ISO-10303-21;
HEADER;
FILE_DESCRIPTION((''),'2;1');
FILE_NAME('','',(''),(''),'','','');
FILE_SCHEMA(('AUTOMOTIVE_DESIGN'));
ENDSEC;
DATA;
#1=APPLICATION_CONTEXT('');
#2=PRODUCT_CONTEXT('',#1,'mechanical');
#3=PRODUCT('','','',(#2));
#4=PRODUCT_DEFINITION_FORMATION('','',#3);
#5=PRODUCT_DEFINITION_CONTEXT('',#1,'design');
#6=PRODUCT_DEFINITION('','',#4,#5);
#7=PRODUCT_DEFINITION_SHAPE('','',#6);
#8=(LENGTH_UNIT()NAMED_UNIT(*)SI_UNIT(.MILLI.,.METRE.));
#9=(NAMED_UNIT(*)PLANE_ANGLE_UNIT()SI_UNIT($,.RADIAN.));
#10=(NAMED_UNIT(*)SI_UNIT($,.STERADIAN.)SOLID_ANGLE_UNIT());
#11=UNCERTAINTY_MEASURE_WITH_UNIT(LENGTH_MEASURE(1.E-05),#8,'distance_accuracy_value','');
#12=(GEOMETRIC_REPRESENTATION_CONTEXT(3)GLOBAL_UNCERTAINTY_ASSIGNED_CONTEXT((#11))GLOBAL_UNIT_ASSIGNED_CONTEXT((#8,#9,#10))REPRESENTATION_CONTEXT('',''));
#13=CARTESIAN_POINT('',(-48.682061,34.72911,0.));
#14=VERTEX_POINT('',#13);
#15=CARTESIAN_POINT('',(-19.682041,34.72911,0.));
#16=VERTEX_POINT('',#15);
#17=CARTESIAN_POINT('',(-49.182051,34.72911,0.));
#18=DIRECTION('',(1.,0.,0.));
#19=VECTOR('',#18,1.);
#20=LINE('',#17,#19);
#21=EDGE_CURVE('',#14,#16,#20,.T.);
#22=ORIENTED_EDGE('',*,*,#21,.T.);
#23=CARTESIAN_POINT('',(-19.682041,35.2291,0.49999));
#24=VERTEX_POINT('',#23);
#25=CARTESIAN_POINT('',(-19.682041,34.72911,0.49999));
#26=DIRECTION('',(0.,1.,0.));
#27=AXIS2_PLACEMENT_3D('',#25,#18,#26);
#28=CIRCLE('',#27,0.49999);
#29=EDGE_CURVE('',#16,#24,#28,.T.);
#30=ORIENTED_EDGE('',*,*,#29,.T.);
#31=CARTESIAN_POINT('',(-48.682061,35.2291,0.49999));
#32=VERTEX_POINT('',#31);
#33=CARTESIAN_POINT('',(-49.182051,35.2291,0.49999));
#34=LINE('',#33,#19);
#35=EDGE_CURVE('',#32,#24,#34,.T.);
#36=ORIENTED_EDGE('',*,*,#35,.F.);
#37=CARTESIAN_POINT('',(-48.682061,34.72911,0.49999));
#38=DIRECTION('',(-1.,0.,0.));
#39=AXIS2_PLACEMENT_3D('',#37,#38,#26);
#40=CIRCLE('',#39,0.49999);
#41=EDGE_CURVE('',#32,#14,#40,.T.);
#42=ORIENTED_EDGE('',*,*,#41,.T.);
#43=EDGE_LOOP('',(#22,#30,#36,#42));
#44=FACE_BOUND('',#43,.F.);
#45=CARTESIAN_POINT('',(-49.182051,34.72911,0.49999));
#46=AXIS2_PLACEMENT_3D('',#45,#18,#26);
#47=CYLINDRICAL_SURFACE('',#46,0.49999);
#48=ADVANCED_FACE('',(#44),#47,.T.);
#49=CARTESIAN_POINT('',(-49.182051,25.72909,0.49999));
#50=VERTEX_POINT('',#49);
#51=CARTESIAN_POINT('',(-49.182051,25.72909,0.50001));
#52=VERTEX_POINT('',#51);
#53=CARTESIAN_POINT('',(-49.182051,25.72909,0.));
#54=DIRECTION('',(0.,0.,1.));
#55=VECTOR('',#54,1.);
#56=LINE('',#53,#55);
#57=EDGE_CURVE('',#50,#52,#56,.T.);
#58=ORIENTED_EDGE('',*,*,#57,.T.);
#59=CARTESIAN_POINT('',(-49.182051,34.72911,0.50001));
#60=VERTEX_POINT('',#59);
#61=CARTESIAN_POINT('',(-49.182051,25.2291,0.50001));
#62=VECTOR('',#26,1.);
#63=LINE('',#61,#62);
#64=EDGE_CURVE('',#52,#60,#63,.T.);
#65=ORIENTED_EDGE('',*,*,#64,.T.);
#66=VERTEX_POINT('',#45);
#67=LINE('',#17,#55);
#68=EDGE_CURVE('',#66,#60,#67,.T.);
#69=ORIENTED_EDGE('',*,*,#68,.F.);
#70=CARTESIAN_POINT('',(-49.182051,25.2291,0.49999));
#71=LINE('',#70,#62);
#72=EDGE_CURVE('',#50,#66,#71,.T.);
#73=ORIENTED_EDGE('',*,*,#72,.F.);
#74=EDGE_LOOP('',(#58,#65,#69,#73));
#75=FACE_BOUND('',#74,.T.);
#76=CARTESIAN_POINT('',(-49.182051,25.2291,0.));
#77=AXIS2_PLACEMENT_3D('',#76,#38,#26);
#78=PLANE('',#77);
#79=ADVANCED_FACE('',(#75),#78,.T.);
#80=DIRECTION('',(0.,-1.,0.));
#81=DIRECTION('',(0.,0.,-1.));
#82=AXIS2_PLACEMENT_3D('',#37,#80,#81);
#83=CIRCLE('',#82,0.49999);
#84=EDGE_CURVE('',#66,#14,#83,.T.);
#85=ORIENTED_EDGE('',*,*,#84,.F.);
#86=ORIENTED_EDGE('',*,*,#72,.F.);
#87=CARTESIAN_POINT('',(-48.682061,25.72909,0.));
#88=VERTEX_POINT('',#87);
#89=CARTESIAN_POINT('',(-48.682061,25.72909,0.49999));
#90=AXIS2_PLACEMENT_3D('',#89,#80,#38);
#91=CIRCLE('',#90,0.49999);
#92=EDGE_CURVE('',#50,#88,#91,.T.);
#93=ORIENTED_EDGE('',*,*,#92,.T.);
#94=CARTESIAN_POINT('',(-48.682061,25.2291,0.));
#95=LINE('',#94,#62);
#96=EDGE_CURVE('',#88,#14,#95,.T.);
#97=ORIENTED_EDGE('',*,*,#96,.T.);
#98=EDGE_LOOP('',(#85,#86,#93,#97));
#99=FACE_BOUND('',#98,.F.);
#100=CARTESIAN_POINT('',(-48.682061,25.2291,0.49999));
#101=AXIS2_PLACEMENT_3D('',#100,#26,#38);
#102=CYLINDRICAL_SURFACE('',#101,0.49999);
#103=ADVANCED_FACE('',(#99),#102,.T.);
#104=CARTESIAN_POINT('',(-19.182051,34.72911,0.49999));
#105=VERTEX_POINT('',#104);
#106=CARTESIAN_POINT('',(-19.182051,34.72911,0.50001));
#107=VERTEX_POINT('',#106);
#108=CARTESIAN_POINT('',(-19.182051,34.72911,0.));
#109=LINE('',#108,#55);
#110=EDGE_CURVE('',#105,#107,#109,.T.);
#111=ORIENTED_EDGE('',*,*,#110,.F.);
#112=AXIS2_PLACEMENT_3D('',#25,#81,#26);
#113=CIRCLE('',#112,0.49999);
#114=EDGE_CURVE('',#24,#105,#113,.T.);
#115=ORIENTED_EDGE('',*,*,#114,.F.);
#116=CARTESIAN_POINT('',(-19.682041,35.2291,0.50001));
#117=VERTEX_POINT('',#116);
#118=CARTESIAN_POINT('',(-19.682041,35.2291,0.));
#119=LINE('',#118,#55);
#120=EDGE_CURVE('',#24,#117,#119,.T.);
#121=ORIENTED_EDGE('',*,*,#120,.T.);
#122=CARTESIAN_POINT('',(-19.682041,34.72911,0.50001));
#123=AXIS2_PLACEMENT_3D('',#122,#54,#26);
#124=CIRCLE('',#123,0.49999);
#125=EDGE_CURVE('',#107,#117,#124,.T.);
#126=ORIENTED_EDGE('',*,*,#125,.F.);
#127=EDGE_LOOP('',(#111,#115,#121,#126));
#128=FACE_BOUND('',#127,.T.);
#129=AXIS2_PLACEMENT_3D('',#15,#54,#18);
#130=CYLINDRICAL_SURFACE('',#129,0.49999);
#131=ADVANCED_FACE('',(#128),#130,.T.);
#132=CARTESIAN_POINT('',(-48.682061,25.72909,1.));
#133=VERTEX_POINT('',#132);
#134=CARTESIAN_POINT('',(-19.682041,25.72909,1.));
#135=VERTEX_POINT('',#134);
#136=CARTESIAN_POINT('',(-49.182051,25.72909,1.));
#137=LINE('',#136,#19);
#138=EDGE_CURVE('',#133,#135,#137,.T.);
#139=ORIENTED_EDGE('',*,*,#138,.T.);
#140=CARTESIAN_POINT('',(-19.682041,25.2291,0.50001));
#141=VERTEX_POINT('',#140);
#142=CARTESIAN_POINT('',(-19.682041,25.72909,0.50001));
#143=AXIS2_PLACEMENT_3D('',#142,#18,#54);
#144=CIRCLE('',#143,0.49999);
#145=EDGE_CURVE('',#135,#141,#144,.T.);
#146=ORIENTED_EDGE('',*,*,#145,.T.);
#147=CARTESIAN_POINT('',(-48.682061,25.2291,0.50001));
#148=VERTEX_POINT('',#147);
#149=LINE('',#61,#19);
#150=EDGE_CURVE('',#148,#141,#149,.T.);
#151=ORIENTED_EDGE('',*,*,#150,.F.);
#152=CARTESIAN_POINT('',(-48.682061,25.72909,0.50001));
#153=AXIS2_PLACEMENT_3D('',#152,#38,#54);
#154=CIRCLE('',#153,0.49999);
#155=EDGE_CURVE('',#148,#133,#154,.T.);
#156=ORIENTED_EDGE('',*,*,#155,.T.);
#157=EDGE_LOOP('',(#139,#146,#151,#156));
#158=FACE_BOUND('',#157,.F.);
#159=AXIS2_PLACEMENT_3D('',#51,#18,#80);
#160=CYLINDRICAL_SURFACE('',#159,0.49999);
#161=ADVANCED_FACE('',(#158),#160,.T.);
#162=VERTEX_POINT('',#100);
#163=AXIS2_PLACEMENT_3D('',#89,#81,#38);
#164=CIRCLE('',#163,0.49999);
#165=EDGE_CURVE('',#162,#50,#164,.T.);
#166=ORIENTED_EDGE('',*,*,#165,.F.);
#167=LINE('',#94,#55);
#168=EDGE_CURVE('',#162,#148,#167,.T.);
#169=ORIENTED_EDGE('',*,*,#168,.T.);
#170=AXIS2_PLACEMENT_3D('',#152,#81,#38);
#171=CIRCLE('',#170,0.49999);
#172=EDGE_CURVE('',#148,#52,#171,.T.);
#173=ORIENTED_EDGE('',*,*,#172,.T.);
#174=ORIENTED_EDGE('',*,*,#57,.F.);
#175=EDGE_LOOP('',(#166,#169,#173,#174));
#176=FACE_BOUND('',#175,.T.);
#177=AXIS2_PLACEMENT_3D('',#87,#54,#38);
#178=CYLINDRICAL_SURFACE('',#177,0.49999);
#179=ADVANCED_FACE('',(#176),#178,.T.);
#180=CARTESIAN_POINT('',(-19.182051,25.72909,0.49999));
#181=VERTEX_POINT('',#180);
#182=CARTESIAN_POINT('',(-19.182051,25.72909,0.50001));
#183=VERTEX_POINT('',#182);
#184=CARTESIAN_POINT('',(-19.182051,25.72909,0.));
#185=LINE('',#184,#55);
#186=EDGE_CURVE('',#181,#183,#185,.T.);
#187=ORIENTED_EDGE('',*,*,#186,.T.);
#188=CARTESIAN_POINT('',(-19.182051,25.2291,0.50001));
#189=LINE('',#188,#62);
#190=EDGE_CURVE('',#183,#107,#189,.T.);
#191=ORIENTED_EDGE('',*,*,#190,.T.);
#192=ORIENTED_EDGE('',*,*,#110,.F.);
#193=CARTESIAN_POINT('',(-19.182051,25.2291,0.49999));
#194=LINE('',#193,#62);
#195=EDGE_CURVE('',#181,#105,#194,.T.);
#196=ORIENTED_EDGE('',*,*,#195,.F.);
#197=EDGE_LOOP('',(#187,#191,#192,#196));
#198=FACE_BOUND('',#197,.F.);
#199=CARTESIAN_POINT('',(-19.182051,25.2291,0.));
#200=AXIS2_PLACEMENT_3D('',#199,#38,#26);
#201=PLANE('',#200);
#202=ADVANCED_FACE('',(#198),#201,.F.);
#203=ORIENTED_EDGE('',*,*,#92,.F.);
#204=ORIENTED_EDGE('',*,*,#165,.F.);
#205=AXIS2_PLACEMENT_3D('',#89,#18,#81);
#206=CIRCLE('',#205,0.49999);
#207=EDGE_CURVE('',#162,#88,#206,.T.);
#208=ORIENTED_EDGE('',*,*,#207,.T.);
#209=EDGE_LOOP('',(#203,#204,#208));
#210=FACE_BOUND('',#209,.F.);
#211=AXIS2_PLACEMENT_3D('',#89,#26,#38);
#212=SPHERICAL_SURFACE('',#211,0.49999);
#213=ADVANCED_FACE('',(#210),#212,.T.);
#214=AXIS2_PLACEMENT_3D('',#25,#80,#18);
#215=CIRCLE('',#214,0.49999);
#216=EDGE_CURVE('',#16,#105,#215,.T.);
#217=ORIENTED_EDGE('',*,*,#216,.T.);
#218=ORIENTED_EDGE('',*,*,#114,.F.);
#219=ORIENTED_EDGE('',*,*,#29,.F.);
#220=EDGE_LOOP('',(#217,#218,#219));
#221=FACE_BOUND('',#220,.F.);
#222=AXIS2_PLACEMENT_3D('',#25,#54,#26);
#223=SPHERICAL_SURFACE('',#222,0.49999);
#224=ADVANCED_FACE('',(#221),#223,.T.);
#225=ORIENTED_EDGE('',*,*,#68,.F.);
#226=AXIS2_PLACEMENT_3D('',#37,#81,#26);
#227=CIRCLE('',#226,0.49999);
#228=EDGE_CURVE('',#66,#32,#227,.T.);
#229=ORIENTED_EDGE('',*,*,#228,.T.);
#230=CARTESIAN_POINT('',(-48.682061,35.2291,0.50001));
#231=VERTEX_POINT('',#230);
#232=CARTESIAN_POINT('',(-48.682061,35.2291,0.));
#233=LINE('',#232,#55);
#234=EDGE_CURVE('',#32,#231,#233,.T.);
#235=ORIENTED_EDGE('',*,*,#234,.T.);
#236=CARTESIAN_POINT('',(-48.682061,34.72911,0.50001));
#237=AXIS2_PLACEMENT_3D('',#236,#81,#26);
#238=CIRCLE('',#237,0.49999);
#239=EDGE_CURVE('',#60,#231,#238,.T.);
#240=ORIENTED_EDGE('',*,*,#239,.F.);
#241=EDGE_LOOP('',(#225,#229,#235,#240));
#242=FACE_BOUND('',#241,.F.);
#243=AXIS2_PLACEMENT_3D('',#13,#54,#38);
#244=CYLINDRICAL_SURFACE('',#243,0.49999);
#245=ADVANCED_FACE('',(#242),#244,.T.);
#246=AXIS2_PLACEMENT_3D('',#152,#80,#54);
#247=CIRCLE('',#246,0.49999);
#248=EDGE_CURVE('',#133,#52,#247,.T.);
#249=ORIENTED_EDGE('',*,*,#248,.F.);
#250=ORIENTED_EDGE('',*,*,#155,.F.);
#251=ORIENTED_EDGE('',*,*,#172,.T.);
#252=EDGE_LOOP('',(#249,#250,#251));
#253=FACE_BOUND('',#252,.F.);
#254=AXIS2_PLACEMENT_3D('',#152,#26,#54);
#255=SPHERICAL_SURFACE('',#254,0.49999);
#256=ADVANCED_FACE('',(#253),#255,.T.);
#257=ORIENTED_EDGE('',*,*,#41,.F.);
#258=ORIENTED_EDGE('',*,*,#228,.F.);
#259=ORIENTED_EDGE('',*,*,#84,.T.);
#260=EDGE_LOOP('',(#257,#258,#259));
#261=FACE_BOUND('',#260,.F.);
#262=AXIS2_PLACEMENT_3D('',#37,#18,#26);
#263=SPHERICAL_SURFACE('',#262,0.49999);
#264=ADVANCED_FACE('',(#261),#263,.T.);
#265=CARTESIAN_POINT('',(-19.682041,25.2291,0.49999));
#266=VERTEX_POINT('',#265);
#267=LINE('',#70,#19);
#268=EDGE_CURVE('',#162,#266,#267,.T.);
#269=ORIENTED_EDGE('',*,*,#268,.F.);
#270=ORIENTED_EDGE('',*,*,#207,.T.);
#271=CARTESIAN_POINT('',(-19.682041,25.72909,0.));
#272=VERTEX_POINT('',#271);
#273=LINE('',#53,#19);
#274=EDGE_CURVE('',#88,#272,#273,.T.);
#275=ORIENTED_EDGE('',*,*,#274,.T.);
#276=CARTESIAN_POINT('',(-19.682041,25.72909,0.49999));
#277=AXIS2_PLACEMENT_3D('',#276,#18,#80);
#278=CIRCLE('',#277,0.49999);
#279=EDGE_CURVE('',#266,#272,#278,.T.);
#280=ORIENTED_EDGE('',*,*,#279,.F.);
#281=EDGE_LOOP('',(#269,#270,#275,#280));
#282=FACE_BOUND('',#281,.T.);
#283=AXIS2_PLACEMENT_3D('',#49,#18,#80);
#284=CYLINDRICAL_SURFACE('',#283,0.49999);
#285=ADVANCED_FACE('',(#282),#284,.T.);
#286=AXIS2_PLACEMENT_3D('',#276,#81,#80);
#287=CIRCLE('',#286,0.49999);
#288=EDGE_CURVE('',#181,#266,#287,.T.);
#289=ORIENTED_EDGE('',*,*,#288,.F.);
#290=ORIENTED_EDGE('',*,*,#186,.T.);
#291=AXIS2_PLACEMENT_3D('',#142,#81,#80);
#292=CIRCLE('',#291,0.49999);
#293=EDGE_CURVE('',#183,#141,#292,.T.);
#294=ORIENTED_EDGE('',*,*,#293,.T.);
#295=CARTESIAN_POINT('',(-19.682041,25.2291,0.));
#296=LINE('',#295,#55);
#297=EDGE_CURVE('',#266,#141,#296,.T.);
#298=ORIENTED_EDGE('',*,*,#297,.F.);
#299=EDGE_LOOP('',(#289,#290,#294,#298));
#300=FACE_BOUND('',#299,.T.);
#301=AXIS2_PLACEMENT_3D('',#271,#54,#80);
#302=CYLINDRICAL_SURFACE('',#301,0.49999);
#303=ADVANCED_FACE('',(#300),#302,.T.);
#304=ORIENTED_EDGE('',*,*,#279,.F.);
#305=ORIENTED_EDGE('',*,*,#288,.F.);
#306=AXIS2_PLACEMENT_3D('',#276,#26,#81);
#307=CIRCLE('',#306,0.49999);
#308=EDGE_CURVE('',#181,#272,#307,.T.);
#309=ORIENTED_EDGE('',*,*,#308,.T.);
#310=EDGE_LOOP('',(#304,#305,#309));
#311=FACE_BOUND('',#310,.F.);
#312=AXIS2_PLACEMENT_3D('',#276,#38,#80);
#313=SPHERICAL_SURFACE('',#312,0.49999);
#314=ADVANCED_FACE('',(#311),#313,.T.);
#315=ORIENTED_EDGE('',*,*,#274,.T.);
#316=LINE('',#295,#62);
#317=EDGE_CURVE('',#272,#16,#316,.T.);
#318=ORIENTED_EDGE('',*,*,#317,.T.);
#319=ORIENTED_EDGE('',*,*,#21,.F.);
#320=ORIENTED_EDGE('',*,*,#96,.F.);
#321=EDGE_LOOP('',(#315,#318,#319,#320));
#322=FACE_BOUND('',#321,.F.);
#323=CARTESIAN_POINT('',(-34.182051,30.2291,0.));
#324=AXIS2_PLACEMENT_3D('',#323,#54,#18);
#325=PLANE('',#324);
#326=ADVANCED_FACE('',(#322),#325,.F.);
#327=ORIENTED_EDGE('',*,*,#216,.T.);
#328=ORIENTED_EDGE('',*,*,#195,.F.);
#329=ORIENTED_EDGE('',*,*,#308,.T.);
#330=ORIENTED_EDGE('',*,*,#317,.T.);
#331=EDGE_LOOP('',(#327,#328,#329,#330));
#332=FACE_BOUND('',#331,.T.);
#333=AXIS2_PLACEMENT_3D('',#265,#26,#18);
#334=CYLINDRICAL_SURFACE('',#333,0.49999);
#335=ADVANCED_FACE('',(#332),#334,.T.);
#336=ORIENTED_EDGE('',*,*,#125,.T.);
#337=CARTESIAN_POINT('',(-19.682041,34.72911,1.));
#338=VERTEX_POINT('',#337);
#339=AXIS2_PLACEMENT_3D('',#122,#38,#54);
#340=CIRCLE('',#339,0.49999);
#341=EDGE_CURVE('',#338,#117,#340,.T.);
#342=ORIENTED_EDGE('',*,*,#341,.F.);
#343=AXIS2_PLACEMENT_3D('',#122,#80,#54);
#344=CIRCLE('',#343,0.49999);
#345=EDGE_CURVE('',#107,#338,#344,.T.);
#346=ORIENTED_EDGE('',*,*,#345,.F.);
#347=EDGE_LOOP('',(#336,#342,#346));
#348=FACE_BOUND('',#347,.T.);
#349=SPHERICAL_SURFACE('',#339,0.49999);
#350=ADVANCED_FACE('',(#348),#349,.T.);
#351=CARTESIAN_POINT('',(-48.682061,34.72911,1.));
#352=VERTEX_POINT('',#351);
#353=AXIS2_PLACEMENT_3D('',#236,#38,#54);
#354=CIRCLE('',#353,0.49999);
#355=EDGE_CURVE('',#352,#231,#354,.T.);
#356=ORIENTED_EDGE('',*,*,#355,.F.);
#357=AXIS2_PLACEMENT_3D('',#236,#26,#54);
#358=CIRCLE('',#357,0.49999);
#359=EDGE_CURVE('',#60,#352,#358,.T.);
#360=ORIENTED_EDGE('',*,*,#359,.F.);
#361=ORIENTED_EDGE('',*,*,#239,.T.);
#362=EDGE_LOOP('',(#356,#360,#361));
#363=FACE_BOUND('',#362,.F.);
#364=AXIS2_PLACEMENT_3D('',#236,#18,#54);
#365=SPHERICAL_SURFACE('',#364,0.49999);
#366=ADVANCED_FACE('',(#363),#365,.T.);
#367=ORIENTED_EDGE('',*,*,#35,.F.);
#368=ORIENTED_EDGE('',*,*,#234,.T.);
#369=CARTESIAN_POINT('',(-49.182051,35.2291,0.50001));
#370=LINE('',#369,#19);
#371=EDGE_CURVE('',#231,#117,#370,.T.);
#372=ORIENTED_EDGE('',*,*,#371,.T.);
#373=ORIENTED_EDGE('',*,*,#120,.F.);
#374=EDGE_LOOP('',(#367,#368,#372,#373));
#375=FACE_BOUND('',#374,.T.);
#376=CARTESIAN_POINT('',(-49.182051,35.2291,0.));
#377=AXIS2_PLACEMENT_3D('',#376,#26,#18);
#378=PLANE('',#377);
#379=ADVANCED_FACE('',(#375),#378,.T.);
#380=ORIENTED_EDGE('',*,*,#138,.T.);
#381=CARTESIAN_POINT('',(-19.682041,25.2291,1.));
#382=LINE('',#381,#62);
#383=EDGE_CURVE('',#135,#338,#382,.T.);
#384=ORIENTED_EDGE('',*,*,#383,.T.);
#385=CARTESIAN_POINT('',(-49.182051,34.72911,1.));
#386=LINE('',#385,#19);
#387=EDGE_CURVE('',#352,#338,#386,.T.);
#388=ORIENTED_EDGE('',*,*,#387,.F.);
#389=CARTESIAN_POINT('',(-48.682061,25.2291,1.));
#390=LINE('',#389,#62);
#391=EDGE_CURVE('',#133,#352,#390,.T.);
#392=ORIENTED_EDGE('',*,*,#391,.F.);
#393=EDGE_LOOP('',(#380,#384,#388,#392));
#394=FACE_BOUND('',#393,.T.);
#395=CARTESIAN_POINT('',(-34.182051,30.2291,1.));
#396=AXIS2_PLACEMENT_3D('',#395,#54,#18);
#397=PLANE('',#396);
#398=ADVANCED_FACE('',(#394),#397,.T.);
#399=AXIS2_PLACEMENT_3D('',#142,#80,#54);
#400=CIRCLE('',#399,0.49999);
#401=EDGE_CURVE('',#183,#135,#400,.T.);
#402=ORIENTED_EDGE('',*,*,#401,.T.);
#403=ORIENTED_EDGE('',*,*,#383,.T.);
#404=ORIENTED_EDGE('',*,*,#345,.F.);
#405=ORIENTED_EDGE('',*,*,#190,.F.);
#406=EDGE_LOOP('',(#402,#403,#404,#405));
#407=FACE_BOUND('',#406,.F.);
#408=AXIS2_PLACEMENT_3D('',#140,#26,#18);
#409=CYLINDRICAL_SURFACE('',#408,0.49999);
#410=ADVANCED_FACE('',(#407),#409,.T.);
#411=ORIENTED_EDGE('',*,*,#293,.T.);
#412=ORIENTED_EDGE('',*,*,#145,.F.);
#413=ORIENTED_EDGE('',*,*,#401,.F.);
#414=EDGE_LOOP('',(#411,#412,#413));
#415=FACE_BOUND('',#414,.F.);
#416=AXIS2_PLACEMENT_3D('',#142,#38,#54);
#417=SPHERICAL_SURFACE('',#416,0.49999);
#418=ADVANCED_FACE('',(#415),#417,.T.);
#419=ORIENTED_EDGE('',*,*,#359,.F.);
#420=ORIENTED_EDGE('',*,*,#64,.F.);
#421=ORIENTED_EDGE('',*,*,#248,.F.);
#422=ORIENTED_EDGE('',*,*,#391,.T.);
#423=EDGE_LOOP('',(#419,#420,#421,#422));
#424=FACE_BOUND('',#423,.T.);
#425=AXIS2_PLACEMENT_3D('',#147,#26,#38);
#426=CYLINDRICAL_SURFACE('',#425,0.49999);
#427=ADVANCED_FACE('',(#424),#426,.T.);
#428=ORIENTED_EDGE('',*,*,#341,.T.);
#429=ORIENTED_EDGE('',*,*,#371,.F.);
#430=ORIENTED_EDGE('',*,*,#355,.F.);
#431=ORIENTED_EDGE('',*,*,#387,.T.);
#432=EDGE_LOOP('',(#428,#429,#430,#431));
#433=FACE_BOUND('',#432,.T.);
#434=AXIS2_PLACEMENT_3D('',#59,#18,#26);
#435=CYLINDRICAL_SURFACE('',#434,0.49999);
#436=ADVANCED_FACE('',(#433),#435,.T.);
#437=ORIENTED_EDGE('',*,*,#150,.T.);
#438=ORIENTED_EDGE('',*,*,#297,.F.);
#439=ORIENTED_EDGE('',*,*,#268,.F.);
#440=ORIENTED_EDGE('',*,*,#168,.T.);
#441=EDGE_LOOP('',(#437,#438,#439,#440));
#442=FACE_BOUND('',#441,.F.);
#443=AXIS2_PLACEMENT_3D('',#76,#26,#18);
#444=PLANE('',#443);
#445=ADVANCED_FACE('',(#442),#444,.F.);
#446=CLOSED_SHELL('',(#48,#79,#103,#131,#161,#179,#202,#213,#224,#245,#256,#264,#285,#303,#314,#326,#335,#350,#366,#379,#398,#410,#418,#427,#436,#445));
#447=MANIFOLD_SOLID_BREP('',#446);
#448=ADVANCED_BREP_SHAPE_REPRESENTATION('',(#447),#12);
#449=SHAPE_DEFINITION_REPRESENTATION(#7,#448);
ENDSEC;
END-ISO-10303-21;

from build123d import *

# Parameters (mm, degrees)
F0_W     = 30
F0_H     = 10
F1_DEPTH = 1
F2_R     = 0.49999


# Not quite as in the source:
# - a fillet or chamfer is up to 0.001 mm smaller than in the source, because OpenCascade refuses the exact size


with BuildPart() as f1:
    # F0 (on Top) → F1 (new body)
    with BuildSketch(Plane.XY):
        with Locations((-34.182050813, 30.2290999105)):
            Rectangle(F0_W, F0_H)
    extrude(amount=F1_DEPTH)

    # F2 (radius 0.5 in the source; OpenCascade refuses exactly that, so slightly less here)
    f2_edges = [f1.edges().sort_by_distance(p)[0] for p in [
        (-34.182051, 35.2291, 1),
        (-49.182051, 30.2291, 1),
        (-34.182051, 25.2291, 1),
        (-19.182051, 30.2291, 1),
        (-19.182051, 35.2291, 0.5),
        (-34.182051, 35.2291, 0),
        (-49.182051, 35.2291, 0.5),
        (-49.182051, 30.2291, 0),
        (-49.182051, 25.2291, 0.5),
        (-34.182051, 25.2291, 0),
        (-19.182051, 25.2291, 0.5),
        (-19.182051, 30.2291, 0),
    ]]
    fillet(f2_edges, radius=F2_R)


solid = f1.part
